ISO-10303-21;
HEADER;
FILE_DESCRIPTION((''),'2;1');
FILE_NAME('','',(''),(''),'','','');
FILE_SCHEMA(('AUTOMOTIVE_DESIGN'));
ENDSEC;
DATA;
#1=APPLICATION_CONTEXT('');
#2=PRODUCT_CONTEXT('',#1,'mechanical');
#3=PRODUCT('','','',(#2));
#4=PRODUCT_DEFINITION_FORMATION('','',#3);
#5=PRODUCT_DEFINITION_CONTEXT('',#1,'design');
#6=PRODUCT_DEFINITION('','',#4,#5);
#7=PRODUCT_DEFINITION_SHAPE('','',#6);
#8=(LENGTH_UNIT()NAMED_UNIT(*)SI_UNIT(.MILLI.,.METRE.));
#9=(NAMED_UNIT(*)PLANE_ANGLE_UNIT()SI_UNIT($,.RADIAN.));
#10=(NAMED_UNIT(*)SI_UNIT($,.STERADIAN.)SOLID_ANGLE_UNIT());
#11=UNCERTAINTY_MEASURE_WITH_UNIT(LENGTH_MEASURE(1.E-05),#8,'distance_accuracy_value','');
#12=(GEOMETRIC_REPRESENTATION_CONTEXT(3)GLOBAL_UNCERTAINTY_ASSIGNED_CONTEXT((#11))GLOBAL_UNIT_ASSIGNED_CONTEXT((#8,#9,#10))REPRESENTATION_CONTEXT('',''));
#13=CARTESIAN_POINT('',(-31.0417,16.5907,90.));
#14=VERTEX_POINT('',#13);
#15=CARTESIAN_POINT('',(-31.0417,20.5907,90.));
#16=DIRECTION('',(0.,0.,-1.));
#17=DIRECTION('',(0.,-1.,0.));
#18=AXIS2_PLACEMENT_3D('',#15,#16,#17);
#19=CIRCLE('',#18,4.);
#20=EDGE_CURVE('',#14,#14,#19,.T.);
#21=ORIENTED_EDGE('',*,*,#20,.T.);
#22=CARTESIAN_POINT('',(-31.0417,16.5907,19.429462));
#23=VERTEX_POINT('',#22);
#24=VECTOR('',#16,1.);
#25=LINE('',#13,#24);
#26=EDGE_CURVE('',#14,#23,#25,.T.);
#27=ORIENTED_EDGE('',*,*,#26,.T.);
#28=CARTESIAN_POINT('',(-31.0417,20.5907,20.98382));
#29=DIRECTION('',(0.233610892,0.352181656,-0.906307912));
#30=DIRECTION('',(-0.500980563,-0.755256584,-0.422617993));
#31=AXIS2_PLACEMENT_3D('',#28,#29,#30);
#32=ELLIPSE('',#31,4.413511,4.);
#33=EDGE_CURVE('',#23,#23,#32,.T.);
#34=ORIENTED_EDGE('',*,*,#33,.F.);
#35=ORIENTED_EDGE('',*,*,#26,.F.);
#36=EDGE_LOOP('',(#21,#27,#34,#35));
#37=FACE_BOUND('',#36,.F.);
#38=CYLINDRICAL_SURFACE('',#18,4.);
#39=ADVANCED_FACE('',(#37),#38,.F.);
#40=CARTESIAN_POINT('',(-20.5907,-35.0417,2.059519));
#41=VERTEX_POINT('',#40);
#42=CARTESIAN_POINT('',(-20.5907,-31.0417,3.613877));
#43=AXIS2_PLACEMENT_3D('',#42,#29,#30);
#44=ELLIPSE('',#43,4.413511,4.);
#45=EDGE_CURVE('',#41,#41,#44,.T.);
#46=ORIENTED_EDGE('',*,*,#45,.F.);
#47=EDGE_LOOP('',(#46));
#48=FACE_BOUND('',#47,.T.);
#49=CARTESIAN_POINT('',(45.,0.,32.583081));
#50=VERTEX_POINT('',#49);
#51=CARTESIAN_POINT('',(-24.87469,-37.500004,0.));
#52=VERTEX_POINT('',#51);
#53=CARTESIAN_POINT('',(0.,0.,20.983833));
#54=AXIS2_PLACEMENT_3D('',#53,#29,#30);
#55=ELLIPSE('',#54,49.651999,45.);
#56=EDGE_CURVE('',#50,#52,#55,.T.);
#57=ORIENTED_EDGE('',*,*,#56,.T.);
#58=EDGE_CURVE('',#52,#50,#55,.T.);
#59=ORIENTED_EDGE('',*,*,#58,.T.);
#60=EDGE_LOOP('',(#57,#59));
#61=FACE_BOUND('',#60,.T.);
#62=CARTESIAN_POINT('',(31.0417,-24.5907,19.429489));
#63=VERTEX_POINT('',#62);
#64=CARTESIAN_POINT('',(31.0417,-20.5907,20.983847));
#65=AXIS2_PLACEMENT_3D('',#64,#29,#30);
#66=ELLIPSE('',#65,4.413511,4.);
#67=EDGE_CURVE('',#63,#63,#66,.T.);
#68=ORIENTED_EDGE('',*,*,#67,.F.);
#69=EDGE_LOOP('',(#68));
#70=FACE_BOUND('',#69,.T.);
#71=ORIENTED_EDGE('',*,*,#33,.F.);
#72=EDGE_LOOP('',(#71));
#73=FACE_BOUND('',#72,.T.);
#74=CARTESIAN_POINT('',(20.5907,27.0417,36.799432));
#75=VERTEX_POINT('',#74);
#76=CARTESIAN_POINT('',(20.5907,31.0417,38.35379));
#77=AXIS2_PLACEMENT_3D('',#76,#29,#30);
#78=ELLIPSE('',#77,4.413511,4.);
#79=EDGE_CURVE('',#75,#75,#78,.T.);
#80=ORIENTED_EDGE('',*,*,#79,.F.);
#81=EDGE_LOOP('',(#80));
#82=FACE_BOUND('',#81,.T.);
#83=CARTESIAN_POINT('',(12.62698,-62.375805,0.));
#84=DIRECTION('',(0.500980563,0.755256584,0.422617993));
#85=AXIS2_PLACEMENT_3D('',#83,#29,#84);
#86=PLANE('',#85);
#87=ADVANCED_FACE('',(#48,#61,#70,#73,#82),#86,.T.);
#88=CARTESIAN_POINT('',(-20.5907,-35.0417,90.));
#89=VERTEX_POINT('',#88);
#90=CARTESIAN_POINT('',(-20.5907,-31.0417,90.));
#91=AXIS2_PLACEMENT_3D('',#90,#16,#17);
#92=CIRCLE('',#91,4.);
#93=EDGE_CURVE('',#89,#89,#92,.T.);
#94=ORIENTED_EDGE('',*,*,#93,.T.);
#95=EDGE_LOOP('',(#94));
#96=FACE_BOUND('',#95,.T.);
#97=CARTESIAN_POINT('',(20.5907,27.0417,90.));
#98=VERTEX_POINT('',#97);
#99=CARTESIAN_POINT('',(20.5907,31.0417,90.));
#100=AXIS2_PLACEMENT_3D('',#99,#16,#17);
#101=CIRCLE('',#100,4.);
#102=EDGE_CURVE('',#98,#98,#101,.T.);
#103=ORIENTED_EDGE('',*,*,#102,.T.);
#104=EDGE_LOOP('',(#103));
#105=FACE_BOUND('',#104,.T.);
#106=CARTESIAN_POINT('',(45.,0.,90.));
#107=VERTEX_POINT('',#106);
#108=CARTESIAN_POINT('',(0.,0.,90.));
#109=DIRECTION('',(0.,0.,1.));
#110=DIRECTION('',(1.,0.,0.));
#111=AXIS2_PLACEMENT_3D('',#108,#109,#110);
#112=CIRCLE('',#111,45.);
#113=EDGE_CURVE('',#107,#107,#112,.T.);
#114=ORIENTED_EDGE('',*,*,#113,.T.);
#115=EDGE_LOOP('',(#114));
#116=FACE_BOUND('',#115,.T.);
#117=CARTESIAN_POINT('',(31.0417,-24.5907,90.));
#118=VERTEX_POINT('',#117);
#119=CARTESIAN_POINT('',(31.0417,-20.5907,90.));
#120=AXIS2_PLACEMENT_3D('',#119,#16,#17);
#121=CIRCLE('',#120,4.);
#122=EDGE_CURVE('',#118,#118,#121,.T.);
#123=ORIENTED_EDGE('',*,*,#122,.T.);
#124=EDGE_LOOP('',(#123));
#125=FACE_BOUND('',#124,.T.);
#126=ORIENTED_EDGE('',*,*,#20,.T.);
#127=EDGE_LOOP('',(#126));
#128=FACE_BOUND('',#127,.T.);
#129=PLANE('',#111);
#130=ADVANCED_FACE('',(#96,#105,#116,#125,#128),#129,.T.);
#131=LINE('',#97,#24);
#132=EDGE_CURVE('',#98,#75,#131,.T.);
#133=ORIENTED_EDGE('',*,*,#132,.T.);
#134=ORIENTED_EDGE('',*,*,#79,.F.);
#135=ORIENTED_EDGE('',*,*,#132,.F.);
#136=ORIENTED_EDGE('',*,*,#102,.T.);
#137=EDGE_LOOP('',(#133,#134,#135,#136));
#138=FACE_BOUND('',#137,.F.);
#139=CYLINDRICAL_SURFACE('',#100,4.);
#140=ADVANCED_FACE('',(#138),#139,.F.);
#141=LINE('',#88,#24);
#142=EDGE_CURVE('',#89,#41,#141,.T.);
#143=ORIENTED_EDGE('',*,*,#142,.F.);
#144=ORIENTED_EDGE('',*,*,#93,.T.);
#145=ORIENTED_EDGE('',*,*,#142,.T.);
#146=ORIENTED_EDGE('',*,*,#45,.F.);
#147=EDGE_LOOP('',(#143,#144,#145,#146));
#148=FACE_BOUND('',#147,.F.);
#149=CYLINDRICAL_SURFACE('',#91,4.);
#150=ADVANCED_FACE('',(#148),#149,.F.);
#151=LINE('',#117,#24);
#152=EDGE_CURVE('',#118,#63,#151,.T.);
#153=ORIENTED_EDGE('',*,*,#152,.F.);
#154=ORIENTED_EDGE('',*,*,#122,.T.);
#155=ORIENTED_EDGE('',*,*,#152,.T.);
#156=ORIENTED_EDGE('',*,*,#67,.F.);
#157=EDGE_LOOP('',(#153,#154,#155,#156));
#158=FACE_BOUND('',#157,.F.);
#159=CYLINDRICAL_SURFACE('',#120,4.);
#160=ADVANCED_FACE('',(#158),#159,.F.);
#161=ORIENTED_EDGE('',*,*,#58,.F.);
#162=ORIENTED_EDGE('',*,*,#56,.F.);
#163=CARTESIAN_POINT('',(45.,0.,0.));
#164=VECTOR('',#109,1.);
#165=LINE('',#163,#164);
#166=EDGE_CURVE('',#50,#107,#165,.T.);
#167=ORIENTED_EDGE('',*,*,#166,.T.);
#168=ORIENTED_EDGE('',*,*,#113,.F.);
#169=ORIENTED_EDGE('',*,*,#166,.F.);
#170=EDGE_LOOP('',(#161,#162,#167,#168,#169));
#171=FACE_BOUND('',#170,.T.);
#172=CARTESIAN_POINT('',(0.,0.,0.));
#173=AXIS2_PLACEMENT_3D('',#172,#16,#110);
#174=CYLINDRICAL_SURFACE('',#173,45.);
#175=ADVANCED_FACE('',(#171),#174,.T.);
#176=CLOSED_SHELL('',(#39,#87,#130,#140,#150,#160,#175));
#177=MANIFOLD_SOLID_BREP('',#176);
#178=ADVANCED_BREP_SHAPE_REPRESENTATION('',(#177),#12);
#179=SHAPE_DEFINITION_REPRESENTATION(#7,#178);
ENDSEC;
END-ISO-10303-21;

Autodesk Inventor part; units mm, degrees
ref_plane "YZ Plane" through (0, 0, 0) normal (1, 0, 0) x (0, 1, 0)
ref_plane "Start plane" through (0, 0, 0) normal (0, 0, 1) x (1, 0, 0)
ref_plane "End plane" through (0, 0, 50) normal (0, 0, 1) x (1, 0, 0)
sketch "Sketch" plane through (0, 0, 0) normal (0, 0, 1) x (1, 0, 0)
  circle A0 centre (0, 0) radius 45
  dimension "d0" = 90
extrude "Body" add sketch "Sketch" along normal blind 90
sketch "Sketch5" plane through (0, 0, 0) normal (0, 0, -1) x (-1, 0, 0)
  line L0 (-37.5, -37.5) -> (-37.5, 42.1268)
  point P0 (0, 0)
ref_plane "Work Plane4" through (37.5, -24.8747, 0) normal (0.8333333, -0.5527708, 0) x (0.5527708, 0.8333333, 0)
sketch "Sketch6" plane through (37.5, -24.8747, 0) normal (0.8333333, -0.5527708, 0) x (0.5527708, 0.8333333, 0)
  line L0 (-45, 0) -> (45, 0) projected
  line L1 (-45, 0) -> (-45, 90) projected
  line L2 (-45, 0) -> (66.6399, 52.0585)
  line L3 (-45, 0) -> (55.6312, 0) construction
  line L4 (66.6399, 52.0585) -> (66.6399, 0)
  line L5 (-45, 0) -> (66.6399, 0)
  point P0 (0, 0)
  point P1 (45, 90)
  dimension "d9" = 25
extrude "Extrusion2" cut sketch "Sketch6" against normal blind 124.75
sketch "Sketch9" plane through (0, 0, 20.9838) normal (0.233611, 0.3521819, -0.9063078) x (-0.8333333, 0.5527708, 0)
  line L0 (0, -12.6785) -> (0, 0.5509) construction
  line L1 (0, -12.6785) -> (11.8004, -12.6785) construction
  ellipse E0 centre (0, 0) end of major axis (0, -49.652) minor radius 45 projected
  line L2 (0, 49.652) -> (100.5638, 49.652) construction
  ellipse E1 centre (0, 29.1675) end of major axis (45, 29.1675) minor radius 40.7839 projected
  line L3 (0, 69.9513) -> (0, -11.6164)
  point P0 (0, -8.8682)
sketch "Sketch7" plane through (0, 0, 90) normal (0, 0, 1) x (1, 0, 0)
  line L0 (0, 0) -> (37.25, 0) construction
  line L1 (144.8898, -42.1091) -> (-141.4436, 147.8231) projected
  circle A0 centre (0, 0) radius 45 projected
  line L2 (17.2325, 42.5693) -> (30.6003, 33.7021)
  circle A1 centre (0, 0) radius 45 projected
  line L3 (24.8747, 37.5) -> (0, 0)
  point P0 (20.5907, 31.0417)
  point P1 (20.5907, 31.0417)
  point P2 (-31.0417, 20.5907)
  point P3 (-31.0417, 20.5907)
  point P4 (-20.5907, -31.0417)
  point P5 (-20.5907, -31.0417)
  point P6 (31.0417, -20.5907)
  point P7 (31.0417, -20.5907)
  point P8 (25.3722, 36.5516)
  dimension "d12" = 37.25
  dimension "d26" = 360
hole "Hole1" at (20.5907, 31.0417, 90) at (-31.0417, 20.5907, 90) at (-20.5907, -31.0417, 90) at (31.0417, -20.5907, 90) direction (0, 0, -1) diameter 8 end up to surface
sketch "Sketch10" plane through (0, 0, 90) normal (0, 0, 1) x (1, 0, 0)
  point P0 (0, 0)
equation "\"G_H\" = 75"
equation "\"G_L\" = d8"
equation "\"G_OFFSET_START\" = 0"
equation "\"G_OFFSET_END\" = 0"
equation "\"G_D\" = 75"
equation "\"d8\" = 50"
properties part number "PN EN 10060 - 75 - 50" material "Steel, Mild"
